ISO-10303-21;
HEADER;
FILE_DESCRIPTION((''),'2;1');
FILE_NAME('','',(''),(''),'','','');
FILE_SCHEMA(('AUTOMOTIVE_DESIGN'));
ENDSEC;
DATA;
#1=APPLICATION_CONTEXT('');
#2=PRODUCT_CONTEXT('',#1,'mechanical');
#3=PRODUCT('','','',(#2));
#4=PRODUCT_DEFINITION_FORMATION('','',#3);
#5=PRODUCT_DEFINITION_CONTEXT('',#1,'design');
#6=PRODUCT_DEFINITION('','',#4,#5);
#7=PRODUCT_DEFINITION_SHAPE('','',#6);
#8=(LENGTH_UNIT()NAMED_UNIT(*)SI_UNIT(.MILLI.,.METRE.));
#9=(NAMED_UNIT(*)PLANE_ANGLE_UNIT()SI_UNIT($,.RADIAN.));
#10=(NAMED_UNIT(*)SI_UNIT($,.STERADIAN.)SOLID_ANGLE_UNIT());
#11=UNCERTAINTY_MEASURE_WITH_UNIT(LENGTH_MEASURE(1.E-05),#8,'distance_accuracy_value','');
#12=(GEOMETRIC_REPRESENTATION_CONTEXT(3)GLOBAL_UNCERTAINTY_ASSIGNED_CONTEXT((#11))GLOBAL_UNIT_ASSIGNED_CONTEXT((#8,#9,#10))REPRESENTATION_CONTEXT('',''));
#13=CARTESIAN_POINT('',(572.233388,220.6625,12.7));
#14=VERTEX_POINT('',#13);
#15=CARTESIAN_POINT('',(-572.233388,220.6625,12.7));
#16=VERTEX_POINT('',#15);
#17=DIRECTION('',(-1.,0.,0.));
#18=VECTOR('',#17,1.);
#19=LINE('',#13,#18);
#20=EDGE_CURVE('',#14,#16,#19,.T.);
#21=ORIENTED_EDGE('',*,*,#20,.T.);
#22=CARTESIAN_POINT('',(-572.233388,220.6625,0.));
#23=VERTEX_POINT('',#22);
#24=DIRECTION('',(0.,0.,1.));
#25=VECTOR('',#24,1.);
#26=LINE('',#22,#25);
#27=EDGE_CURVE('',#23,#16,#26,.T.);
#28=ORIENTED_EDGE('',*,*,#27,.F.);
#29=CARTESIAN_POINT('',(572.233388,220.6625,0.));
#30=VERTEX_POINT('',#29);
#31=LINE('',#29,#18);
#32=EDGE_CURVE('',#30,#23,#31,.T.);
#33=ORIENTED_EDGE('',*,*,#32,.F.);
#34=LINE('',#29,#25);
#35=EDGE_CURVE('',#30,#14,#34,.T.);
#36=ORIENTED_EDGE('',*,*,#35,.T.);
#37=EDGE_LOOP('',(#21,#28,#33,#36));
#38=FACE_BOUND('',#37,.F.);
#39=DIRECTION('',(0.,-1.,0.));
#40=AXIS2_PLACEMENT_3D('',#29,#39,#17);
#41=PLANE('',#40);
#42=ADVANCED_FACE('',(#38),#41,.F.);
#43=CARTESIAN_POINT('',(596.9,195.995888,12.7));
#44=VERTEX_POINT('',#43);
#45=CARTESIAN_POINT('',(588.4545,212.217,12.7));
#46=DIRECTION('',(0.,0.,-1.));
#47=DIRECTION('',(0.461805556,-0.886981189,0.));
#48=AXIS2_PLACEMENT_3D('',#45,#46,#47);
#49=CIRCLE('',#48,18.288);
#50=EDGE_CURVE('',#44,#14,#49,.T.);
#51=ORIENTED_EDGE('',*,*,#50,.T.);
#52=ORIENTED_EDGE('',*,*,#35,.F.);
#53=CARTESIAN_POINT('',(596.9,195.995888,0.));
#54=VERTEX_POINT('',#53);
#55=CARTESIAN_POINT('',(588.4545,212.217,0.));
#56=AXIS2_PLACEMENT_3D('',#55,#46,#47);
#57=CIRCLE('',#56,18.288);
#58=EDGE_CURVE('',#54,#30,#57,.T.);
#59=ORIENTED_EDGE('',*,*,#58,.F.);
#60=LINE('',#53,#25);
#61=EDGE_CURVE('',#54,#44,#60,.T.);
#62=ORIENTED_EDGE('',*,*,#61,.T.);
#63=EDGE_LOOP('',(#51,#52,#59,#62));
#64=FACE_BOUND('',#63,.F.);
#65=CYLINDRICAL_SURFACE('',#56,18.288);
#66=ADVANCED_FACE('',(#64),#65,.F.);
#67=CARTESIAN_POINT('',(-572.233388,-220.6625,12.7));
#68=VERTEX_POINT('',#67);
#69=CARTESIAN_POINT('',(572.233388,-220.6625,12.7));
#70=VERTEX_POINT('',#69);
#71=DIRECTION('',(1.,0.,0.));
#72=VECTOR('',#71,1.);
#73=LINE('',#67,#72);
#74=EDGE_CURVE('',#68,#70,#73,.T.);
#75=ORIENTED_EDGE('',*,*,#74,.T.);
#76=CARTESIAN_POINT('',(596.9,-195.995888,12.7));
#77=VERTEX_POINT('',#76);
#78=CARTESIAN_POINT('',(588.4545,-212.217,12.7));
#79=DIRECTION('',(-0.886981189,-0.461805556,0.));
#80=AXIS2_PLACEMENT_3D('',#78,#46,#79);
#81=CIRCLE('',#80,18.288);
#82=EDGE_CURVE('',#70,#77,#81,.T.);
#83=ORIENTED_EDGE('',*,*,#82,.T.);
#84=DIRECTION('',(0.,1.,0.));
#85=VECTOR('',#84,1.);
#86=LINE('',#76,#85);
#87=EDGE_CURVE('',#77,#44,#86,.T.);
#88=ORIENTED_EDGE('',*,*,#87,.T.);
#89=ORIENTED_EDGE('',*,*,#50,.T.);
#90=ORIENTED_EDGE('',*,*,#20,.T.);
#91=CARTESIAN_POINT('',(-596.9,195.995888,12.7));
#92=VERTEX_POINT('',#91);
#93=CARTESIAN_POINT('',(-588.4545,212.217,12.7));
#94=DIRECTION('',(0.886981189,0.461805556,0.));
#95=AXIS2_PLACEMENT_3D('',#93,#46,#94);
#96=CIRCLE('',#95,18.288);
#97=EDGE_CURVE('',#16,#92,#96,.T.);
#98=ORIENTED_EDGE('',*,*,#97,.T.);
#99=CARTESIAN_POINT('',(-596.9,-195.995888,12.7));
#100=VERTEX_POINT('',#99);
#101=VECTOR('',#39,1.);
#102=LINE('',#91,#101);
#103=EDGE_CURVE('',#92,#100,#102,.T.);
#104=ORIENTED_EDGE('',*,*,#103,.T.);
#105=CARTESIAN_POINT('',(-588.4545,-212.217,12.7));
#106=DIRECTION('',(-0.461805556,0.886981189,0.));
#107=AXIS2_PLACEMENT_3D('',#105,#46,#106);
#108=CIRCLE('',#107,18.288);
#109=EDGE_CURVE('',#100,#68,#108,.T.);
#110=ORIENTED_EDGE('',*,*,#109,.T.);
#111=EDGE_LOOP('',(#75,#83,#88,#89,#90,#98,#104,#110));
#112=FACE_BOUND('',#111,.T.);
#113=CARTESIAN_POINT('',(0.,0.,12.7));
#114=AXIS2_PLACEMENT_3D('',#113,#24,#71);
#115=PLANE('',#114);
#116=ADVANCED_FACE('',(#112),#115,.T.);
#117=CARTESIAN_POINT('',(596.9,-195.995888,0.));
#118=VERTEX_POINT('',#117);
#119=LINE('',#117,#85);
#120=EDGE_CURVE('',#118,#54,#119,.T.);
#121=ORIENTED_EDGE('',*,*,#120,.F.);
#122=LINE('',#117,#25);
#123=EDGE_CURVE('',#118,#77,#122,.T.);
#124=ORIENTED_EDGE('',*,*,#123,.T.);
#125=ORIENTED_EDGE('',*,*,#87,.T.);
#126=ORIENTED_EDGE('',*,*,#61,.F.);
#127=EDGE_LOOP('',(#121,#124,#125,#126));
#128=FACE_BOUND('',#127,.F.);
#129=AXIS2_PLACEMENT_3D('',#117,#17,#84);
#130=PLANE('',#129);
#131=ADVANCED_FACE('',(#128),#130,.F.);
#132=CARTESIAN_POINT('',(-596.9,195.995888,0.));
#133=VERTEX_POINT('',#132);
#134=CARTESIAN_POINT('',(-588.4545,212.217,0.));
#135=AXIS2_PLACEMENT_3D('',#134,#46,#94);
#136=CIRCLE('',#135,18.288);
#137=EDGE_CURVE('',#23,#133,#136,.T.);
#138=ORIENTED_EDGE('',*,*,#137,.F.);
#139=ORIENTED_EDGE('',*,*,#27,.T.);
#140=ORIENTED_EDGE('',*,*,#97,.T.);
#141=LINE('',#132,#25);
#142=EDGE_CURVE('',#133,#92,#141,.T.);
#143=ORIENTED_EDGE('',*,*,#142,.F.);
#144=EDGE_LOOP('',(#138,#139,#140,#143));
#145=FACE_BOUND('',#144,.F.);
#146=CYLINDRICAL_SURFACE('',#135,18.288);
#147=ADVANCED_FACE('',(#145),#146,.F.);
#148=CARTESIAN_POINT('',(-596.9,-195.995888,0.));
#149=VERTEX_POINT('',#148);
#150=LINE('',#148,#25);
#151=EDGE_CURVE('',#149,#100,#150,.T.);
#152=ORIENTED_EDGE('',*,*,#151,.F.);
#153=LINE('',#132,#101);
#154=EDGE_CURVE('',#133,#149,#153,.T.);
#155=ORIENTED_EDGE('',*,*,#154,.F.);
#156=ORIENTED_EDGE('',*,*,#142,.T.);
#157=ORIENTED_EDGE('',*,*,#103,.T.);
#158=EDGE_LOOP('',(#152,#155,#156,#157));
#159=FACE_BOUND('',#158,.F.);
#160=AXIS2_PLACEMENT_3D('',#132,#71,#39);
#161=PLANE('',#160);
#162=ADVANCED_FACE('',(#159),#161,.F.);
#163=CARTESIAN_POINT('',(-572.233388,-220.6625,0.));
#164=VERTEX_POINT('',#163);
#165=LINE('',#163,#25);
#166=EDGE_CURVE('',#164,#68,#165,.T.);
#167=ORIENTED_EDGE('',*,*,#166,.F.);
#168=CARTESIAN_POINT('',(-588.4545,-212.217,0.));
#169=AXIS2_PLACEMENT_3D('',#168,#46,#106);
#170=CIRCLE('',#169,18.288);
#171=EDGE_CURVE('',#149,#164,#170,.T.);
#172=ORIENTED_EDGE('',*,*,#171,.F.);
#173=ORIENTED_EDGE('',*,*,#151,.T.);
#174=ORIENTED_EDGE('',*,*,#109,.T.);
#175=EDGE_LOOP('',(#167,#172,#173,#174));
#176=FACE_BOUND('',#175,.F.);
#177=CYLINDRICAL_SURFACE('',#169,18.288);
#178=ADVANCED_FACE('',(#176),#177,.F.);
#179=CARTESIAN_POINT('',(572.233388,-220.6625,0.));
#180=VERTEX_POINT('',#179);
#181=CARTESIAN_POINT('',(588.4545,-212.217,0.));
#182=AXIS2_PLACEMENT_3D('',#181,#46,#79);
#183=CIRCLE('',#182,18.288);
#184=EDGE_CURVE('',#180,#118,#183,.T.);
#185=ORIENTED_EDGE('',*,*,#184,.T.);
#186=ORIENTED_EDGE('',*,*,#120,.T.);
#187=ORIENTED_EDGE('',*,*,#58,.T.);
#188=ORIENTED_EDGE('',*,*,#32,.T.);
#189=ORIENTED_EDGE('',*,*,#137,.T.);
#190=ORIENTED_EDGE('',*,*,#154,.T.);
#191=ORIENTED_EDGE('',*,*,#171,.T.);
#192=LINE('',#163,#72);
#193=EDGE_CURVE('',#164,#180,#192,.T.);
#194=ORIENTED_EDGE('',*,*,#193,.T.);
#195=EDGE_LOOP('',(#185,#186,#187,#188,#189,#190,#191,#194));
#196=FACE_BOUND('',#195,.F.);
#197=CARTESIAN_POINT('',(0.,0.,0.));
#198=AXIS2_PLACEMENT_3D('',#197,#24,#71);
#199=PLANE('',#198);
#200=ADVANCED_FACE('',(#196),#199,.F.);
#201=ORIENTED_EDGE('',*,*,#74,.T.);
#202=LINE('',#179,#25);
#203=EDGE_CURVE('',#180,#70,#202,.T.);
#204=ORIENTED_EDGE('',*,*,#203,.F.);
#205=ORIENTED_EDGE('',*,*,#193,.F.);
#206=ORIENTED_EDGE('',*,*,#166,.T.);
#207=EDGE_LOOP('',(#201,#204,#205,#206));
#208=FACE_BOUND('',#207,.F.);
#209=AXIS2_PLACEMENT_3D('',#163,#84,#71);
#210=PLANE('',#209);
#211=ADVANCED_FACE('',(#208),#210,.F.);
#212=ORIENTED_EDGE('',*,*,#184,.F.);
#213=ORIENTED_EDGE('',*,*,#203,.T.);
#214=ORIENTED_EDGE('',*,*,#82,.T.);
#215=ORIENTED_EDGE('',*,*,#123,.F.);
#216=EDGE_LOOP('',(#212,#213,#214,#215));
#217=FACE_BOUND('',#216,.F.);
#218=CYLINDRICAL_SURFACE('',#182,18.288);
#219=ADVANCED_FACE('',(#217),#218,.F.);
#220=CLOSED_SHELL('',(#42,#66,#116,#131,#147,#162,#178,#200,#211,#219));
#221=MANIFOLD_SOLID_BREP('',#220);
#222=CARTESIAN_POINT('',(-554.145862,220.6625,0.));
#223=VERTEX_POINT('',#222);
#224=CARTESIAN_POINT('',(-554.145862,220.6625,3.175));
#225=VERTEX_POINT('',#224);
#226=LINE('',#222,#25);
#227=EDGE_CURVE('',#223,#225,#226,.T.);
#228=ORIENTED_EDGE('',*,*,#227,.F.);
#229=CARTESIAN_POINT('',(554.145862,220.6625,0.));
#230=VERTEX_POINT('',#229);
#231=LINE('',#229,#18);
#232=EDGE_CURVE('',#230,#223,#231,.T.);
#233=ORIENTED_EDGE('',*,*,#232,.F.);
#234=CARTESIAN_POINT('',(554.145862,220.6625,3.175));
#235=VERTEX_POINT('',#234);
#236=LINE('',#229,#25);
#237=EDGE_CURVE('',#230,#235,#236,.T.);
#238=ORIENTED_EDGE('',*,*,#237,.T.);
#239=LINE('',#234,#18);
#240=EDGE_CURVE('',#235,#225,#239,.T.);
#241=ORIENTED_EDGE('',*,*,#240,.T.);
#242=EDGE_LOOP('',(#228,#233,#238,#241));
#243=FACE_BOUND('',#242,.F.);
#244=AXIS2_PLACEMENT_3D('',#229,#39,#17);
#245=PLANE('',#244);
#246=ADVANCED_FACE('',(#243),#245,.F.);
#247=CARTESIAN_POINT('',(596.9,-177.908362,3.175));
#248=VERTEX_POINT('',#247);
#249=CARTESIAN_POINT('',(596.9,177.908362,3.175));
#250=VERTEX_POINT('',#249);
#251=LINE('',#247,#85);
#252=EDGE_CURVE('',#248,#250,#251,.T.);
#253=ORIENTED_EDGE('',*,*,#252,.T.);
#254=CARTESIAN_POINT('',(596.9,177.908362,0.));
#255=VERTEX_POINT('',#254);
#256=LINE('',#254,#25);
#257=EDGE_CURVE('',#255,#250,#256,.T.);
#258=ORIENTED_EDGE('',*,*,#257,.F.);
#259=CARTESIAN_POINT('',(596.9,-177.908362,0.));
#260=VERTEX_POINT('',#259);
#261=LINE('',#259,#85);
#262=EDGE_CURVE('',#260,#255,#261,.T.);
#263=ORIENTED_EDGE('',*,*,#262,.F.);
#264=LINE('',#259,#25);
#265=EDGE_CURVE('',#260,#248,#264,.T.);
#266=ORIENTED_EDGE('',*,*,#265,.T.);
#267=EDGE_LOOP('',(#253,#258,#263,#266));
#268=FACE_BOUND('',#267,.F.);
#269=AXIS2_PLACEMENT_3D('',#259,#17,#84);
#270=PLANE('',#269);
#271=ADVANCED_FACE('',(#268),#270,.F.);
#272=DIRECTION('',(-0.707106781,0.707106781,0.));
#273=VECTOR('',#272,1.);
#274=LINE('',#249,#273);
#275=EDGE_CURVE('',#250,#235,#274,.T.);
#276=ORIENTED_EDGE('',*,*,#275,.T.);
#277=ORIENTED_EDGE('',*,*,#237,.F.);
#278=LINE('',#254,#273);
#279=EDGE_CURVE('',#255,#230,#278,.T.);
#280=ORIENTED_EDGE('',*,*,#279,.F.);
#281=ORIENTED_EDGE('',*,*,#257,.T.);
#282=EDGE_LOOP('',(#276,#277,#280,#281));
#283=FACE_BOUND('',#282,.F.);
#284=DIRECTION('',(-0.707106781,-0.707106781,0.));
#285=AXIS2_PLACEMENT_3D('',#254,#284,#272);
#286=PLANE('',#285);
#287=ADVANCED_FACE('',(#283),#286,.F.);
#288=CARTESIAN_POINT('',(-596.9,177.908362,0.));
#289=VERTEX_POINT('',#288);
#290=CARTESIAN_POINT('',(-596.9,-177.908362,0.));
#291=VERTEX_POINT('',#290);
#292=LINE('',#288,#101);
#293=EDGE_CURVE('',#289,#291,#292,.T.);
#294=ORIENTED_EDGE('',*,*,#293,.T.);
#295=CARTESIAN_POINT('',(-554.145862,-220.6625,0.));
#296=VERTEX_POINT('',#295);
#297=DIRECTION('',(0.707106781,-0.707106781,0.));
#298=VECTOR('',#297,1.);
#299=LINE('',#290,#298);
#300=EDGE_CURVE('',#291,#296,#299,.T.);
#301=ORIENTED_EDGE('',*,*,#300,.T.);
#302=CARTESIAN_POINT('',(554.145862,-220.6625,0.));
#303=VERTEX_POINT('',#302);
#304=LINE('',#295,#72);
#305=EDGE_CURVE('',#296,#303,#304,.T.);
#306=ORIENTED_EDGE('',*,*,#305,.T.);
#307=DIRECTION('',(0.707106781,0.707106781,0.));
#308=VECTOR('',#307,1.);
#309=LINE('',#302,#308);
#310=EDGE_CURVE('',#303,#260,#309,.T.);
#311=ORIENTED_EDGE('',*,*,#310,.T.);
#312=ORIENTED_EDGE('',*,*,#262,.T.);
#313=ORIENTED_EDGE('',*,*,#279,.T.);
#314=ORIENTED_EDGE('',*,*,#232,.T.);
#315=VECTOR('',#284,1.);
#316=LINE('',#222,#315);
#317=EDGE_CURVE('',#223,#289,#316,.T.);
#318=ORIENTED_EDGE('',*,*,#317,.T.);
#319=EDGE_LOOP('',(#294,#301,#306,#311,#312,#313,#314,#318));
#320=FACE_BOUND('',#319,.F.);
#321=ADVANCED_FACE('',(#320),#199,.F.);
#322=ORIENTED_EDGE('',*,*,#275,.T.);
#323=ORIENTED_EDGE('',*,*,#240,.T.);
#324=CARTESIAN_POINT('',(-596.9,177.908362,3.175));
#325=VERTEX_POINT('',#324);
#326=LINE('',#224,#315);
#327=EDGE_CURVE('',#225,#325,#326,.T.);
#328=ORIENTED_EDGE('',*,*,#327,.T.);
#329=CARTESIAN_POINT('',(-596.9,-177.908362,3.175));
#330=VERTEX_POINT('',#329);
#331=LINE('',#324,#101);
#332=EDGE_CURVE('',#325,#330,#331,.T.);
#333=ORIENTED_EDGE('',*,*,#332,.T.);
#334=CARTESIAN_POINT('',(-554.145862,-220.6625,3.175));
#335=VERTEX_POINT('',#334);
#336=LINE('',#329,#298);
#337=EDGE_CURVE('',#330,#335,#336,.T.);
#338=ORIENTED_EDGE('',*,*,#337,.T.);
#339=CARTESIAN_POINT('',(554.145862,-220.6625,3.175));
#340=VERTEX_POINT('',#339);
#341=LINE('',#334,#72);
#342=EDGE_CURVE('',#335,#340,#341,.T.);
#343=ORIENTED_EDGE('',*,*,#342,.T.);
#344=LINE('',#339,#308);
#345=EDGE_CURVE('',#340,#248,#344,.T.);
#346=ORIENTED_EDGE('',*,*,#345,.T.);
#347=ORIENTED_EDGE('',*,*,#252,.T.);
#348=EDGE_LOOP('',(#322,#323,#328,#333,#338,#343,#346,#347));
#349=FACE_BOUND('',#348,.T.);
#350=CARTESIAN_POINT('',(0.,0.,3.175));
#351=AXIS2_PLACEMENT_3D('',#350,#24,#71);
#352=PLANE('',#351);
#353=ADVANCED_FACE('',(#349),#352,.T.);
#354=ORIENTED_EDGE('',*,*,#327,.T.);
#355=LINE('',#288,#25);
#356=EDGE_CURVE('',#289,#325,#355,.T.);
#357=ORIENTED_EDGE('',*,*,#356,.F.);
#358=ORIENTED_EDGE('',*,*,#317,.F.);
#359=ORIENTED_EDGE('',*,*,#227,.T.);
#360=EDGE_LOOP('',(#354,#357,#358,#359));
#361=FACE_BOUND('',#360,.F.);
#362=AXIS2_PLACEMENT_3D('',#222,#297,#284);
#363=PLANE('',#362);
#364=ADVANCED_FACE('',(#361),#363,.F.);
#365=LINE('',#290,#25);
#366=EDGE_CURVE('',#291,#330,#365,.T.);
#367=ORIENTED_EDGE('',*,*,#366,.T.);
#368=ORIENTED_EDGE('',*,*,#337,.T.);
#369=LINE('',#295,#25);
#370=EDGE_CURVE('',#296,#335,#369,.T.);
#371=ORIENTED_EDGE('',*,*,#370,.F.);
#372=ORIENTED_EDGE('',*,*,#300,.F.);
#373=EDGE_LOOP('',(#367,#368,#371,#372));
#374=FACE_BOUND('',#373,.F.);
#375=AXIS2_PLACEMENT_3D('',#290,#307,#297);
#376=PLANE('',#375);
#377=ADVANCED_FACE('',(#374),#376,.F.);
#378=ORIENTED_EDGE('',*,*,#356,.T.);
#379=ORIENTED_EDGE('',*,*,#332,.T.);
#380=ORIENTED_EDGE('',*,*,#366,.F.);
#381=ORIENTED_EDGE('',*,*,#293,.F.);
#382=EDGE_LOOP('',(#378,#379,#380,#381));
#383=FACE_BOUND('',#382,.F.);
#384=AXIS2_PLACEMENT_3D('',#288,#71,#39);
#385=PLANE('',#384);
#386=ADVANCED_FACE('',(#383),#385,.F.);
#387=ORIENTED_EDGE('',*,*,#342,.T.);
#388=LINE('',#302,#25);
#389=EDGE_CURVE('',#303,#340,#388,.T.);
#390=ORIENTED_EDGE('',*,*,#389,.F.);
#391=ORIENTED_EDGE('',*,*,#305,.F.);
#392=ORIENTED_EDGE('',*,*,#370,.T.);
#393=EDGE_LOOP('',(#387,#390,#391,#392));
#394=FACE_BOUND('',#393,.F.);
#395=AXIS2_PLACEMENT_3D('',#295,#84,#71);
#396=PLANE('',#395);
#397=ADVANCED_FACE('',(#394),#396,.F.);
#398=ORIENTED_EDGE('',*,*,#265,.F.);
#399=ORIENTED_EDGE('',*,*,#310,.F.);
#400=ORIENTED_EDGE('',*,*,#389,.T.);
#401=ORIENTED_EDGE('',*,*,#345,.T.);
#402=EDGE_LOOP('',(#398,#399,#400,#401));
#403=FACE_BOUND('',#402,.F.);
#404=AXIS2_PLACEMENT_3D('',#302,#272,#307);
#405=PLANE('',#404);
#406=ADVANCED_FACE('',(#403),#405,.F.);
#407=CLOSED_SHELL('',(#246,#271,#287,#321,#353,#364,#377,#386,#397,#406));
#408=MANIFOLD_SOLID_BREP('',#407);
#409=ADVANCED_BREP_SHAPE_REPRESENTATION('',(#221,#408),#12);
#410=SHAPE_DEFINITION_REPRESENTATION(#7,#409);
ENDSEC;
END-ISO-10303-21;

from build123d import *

# Parameters (mm, degrees)
F5_DEPTH = 12.7
F7_DEPTH = 3.175


# Not quite as in the source:
# - a length typed as a fraction of an inch, garbled in the dataset ("3 / 203.2 mm" for 3/8 in), is restored


with BuildPart() as f5:
    # F4 (on Top) → F5 (new body)
    with BuildSketch(Plane.XY):
        with BuildLine():
            Line((572.2333880236, 220.6625), (-572.2333880236, 220.6625))
            ThreePointArc((-572.2333880236, 220.6625), (-575.5229311857, 199.2854311857), (-596.9, 195.9958880236))
            Line((-596.9, 195.9958880236), (-596.9, -195.9958880236))
            ThreePointArc((-596.9, -195.9958880236), (-575.5229311857, -199.2854311857), (-572.2333880236, -220.6625))
            Line((-572.2333880236, -220.6625), (572.2333880236, -220.6625))
            ThreePointArc((572.2333880236, -220.6625), (575.5229311857, -199.2854311857), (596.9, -195.9958880236))
            Line((596.9, -195.9958880236), (596.9, 195.9958880236))
            ThreePointArc((596.9, 195.9958880236), (575.5229311857, 199.2854311857), (572.2333880236, 220.6625))
        make_face()
    extrude(amount=F5_DEPTH)


with BuildPart() as f7:
    # F6 (on Top) → F7 (new body)
    with BuildSketch(Plane.XY):
        Polygon((596.9, 177.9083623713), (554.1458623713, 220.6625), (-554.1458623713, 220.6625), (-596.9, 177.9083623713), (-596.9, -177.9083623713), (-554.1458623713, -220.6625), (554.1458623713, -220.6625), (596.9, -177.9083623713), align=None)
    extrude(amount=F7_DEPTH)


solid = Compound([f5.part, f7.part])
